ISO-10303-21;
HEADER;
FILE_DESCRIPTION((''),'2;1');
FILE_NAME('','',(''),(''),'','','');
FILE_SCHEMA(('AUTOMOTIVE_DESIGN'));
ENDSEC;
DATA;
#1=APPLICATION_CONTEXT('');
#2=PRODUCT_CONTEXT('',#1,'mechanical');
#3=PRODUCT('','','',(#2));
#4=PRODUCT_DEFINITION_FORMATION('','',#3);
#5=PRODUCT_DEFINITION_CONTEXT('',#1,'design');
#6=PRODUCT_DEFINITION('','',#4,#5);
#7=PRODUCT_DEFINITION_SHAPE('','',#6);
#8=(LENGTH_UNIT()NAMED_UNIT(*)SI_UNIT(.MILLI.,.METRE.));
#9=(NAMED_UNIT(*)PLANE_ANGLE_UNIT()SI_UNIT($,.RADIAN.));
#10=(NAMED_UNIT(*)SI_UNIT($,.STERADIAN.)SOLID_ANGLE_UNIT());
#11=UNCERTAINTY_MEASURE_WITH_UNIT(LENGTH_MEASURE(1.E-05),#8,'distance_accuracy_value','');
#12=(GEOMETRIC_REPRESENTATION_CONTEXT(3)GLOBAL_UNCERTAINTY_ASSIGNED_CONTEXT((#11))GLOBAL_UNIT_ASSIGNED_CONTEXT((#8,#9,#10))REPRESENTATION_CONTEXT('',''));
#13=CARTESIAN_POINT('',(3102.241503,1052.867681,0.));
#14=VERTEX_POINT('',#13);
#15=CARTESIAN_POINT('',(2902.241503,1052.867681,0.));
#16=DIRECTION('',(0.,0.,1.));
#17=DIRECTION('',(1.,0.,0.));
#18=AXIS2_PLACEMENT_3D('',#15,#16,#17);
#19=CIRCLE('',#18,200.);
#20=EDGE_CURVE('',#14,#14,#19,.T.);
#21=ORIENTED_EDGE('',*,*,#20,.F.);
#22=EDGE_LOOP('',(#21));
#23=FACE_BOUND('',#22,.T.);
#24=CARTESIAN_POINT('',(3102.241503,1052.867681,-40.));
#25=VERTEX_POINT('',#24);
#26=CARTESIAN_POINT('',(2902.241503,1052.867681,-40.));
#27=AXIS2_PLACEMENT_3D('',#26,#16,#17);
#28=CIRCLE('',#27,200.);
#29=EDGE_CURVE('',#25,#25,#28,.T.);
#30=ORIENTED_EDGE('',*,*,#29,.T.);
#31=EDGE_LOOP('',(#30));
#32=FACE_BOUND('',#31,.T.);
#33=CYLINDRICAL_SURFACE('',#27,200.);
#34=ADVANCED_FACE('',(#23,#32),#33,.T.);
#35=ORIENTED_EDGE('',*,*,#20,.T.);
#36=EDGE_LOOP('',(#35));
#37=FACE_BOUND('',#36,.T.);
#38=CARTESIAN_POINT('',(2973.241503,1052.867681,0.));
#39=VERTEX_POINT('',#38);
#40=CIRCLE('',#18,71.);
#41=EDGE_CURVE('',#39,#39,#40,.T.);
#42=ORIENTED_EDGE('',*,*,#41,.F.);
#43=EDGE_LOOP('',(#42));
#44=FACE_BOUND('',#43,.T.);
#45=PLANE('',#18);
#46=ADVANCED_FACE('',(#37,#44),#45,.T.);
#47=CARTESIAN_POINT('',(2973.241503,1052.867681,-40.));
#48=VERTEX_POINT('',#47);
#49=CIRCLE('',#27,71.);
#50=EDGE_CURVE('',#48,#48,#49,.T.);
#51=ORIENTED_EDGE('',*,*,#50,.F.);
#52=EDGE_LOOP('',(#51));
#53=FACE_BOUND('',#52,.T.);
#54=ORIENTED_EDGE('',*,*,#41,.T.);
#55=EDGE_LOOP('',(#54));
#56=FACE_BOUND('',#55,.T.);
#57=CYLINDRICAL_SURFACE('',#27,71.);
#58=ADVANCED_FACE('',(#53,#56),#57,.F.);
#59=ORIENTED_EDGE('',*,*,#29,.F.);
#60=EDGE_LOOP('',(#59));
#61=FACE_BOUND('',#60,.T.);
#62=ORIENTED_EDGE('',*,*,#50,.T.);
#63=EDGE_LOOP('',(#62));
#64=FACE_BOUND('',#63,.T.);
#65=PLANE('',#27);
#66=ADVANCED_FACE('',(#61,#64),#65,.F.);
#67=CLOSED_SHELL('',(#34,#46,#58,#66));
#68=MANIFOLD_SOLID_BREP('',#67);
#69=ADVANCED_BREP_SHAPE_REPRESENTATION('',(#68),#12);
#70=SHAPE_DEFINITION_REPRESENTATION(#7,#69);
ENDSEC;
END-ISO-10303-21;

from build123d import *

# Parameters (mm, degrees)
IZIM1_R            = 200
IZIM1_R_2          = 71
TABAN_FLAN_1_DEPTH = 40


# Sheet-metal steps are written as plain solids
with BuildPart() as part:
    # Çizim1 → Taban-Flanş1 (new body)
    with BuildSketch(Plane.XY):
        with Locations((2902.241502802, 1052.867680593)):
            Circle(IZIM1_R)
        with Locations((2902.241502802, 1052.867680593)):
            Circle(IZIM1_R_2, mode=Mode.SUBTRACT)
    extrude(amount=-TABAN_FLAN_1_DEPTH)


solid = part.part
